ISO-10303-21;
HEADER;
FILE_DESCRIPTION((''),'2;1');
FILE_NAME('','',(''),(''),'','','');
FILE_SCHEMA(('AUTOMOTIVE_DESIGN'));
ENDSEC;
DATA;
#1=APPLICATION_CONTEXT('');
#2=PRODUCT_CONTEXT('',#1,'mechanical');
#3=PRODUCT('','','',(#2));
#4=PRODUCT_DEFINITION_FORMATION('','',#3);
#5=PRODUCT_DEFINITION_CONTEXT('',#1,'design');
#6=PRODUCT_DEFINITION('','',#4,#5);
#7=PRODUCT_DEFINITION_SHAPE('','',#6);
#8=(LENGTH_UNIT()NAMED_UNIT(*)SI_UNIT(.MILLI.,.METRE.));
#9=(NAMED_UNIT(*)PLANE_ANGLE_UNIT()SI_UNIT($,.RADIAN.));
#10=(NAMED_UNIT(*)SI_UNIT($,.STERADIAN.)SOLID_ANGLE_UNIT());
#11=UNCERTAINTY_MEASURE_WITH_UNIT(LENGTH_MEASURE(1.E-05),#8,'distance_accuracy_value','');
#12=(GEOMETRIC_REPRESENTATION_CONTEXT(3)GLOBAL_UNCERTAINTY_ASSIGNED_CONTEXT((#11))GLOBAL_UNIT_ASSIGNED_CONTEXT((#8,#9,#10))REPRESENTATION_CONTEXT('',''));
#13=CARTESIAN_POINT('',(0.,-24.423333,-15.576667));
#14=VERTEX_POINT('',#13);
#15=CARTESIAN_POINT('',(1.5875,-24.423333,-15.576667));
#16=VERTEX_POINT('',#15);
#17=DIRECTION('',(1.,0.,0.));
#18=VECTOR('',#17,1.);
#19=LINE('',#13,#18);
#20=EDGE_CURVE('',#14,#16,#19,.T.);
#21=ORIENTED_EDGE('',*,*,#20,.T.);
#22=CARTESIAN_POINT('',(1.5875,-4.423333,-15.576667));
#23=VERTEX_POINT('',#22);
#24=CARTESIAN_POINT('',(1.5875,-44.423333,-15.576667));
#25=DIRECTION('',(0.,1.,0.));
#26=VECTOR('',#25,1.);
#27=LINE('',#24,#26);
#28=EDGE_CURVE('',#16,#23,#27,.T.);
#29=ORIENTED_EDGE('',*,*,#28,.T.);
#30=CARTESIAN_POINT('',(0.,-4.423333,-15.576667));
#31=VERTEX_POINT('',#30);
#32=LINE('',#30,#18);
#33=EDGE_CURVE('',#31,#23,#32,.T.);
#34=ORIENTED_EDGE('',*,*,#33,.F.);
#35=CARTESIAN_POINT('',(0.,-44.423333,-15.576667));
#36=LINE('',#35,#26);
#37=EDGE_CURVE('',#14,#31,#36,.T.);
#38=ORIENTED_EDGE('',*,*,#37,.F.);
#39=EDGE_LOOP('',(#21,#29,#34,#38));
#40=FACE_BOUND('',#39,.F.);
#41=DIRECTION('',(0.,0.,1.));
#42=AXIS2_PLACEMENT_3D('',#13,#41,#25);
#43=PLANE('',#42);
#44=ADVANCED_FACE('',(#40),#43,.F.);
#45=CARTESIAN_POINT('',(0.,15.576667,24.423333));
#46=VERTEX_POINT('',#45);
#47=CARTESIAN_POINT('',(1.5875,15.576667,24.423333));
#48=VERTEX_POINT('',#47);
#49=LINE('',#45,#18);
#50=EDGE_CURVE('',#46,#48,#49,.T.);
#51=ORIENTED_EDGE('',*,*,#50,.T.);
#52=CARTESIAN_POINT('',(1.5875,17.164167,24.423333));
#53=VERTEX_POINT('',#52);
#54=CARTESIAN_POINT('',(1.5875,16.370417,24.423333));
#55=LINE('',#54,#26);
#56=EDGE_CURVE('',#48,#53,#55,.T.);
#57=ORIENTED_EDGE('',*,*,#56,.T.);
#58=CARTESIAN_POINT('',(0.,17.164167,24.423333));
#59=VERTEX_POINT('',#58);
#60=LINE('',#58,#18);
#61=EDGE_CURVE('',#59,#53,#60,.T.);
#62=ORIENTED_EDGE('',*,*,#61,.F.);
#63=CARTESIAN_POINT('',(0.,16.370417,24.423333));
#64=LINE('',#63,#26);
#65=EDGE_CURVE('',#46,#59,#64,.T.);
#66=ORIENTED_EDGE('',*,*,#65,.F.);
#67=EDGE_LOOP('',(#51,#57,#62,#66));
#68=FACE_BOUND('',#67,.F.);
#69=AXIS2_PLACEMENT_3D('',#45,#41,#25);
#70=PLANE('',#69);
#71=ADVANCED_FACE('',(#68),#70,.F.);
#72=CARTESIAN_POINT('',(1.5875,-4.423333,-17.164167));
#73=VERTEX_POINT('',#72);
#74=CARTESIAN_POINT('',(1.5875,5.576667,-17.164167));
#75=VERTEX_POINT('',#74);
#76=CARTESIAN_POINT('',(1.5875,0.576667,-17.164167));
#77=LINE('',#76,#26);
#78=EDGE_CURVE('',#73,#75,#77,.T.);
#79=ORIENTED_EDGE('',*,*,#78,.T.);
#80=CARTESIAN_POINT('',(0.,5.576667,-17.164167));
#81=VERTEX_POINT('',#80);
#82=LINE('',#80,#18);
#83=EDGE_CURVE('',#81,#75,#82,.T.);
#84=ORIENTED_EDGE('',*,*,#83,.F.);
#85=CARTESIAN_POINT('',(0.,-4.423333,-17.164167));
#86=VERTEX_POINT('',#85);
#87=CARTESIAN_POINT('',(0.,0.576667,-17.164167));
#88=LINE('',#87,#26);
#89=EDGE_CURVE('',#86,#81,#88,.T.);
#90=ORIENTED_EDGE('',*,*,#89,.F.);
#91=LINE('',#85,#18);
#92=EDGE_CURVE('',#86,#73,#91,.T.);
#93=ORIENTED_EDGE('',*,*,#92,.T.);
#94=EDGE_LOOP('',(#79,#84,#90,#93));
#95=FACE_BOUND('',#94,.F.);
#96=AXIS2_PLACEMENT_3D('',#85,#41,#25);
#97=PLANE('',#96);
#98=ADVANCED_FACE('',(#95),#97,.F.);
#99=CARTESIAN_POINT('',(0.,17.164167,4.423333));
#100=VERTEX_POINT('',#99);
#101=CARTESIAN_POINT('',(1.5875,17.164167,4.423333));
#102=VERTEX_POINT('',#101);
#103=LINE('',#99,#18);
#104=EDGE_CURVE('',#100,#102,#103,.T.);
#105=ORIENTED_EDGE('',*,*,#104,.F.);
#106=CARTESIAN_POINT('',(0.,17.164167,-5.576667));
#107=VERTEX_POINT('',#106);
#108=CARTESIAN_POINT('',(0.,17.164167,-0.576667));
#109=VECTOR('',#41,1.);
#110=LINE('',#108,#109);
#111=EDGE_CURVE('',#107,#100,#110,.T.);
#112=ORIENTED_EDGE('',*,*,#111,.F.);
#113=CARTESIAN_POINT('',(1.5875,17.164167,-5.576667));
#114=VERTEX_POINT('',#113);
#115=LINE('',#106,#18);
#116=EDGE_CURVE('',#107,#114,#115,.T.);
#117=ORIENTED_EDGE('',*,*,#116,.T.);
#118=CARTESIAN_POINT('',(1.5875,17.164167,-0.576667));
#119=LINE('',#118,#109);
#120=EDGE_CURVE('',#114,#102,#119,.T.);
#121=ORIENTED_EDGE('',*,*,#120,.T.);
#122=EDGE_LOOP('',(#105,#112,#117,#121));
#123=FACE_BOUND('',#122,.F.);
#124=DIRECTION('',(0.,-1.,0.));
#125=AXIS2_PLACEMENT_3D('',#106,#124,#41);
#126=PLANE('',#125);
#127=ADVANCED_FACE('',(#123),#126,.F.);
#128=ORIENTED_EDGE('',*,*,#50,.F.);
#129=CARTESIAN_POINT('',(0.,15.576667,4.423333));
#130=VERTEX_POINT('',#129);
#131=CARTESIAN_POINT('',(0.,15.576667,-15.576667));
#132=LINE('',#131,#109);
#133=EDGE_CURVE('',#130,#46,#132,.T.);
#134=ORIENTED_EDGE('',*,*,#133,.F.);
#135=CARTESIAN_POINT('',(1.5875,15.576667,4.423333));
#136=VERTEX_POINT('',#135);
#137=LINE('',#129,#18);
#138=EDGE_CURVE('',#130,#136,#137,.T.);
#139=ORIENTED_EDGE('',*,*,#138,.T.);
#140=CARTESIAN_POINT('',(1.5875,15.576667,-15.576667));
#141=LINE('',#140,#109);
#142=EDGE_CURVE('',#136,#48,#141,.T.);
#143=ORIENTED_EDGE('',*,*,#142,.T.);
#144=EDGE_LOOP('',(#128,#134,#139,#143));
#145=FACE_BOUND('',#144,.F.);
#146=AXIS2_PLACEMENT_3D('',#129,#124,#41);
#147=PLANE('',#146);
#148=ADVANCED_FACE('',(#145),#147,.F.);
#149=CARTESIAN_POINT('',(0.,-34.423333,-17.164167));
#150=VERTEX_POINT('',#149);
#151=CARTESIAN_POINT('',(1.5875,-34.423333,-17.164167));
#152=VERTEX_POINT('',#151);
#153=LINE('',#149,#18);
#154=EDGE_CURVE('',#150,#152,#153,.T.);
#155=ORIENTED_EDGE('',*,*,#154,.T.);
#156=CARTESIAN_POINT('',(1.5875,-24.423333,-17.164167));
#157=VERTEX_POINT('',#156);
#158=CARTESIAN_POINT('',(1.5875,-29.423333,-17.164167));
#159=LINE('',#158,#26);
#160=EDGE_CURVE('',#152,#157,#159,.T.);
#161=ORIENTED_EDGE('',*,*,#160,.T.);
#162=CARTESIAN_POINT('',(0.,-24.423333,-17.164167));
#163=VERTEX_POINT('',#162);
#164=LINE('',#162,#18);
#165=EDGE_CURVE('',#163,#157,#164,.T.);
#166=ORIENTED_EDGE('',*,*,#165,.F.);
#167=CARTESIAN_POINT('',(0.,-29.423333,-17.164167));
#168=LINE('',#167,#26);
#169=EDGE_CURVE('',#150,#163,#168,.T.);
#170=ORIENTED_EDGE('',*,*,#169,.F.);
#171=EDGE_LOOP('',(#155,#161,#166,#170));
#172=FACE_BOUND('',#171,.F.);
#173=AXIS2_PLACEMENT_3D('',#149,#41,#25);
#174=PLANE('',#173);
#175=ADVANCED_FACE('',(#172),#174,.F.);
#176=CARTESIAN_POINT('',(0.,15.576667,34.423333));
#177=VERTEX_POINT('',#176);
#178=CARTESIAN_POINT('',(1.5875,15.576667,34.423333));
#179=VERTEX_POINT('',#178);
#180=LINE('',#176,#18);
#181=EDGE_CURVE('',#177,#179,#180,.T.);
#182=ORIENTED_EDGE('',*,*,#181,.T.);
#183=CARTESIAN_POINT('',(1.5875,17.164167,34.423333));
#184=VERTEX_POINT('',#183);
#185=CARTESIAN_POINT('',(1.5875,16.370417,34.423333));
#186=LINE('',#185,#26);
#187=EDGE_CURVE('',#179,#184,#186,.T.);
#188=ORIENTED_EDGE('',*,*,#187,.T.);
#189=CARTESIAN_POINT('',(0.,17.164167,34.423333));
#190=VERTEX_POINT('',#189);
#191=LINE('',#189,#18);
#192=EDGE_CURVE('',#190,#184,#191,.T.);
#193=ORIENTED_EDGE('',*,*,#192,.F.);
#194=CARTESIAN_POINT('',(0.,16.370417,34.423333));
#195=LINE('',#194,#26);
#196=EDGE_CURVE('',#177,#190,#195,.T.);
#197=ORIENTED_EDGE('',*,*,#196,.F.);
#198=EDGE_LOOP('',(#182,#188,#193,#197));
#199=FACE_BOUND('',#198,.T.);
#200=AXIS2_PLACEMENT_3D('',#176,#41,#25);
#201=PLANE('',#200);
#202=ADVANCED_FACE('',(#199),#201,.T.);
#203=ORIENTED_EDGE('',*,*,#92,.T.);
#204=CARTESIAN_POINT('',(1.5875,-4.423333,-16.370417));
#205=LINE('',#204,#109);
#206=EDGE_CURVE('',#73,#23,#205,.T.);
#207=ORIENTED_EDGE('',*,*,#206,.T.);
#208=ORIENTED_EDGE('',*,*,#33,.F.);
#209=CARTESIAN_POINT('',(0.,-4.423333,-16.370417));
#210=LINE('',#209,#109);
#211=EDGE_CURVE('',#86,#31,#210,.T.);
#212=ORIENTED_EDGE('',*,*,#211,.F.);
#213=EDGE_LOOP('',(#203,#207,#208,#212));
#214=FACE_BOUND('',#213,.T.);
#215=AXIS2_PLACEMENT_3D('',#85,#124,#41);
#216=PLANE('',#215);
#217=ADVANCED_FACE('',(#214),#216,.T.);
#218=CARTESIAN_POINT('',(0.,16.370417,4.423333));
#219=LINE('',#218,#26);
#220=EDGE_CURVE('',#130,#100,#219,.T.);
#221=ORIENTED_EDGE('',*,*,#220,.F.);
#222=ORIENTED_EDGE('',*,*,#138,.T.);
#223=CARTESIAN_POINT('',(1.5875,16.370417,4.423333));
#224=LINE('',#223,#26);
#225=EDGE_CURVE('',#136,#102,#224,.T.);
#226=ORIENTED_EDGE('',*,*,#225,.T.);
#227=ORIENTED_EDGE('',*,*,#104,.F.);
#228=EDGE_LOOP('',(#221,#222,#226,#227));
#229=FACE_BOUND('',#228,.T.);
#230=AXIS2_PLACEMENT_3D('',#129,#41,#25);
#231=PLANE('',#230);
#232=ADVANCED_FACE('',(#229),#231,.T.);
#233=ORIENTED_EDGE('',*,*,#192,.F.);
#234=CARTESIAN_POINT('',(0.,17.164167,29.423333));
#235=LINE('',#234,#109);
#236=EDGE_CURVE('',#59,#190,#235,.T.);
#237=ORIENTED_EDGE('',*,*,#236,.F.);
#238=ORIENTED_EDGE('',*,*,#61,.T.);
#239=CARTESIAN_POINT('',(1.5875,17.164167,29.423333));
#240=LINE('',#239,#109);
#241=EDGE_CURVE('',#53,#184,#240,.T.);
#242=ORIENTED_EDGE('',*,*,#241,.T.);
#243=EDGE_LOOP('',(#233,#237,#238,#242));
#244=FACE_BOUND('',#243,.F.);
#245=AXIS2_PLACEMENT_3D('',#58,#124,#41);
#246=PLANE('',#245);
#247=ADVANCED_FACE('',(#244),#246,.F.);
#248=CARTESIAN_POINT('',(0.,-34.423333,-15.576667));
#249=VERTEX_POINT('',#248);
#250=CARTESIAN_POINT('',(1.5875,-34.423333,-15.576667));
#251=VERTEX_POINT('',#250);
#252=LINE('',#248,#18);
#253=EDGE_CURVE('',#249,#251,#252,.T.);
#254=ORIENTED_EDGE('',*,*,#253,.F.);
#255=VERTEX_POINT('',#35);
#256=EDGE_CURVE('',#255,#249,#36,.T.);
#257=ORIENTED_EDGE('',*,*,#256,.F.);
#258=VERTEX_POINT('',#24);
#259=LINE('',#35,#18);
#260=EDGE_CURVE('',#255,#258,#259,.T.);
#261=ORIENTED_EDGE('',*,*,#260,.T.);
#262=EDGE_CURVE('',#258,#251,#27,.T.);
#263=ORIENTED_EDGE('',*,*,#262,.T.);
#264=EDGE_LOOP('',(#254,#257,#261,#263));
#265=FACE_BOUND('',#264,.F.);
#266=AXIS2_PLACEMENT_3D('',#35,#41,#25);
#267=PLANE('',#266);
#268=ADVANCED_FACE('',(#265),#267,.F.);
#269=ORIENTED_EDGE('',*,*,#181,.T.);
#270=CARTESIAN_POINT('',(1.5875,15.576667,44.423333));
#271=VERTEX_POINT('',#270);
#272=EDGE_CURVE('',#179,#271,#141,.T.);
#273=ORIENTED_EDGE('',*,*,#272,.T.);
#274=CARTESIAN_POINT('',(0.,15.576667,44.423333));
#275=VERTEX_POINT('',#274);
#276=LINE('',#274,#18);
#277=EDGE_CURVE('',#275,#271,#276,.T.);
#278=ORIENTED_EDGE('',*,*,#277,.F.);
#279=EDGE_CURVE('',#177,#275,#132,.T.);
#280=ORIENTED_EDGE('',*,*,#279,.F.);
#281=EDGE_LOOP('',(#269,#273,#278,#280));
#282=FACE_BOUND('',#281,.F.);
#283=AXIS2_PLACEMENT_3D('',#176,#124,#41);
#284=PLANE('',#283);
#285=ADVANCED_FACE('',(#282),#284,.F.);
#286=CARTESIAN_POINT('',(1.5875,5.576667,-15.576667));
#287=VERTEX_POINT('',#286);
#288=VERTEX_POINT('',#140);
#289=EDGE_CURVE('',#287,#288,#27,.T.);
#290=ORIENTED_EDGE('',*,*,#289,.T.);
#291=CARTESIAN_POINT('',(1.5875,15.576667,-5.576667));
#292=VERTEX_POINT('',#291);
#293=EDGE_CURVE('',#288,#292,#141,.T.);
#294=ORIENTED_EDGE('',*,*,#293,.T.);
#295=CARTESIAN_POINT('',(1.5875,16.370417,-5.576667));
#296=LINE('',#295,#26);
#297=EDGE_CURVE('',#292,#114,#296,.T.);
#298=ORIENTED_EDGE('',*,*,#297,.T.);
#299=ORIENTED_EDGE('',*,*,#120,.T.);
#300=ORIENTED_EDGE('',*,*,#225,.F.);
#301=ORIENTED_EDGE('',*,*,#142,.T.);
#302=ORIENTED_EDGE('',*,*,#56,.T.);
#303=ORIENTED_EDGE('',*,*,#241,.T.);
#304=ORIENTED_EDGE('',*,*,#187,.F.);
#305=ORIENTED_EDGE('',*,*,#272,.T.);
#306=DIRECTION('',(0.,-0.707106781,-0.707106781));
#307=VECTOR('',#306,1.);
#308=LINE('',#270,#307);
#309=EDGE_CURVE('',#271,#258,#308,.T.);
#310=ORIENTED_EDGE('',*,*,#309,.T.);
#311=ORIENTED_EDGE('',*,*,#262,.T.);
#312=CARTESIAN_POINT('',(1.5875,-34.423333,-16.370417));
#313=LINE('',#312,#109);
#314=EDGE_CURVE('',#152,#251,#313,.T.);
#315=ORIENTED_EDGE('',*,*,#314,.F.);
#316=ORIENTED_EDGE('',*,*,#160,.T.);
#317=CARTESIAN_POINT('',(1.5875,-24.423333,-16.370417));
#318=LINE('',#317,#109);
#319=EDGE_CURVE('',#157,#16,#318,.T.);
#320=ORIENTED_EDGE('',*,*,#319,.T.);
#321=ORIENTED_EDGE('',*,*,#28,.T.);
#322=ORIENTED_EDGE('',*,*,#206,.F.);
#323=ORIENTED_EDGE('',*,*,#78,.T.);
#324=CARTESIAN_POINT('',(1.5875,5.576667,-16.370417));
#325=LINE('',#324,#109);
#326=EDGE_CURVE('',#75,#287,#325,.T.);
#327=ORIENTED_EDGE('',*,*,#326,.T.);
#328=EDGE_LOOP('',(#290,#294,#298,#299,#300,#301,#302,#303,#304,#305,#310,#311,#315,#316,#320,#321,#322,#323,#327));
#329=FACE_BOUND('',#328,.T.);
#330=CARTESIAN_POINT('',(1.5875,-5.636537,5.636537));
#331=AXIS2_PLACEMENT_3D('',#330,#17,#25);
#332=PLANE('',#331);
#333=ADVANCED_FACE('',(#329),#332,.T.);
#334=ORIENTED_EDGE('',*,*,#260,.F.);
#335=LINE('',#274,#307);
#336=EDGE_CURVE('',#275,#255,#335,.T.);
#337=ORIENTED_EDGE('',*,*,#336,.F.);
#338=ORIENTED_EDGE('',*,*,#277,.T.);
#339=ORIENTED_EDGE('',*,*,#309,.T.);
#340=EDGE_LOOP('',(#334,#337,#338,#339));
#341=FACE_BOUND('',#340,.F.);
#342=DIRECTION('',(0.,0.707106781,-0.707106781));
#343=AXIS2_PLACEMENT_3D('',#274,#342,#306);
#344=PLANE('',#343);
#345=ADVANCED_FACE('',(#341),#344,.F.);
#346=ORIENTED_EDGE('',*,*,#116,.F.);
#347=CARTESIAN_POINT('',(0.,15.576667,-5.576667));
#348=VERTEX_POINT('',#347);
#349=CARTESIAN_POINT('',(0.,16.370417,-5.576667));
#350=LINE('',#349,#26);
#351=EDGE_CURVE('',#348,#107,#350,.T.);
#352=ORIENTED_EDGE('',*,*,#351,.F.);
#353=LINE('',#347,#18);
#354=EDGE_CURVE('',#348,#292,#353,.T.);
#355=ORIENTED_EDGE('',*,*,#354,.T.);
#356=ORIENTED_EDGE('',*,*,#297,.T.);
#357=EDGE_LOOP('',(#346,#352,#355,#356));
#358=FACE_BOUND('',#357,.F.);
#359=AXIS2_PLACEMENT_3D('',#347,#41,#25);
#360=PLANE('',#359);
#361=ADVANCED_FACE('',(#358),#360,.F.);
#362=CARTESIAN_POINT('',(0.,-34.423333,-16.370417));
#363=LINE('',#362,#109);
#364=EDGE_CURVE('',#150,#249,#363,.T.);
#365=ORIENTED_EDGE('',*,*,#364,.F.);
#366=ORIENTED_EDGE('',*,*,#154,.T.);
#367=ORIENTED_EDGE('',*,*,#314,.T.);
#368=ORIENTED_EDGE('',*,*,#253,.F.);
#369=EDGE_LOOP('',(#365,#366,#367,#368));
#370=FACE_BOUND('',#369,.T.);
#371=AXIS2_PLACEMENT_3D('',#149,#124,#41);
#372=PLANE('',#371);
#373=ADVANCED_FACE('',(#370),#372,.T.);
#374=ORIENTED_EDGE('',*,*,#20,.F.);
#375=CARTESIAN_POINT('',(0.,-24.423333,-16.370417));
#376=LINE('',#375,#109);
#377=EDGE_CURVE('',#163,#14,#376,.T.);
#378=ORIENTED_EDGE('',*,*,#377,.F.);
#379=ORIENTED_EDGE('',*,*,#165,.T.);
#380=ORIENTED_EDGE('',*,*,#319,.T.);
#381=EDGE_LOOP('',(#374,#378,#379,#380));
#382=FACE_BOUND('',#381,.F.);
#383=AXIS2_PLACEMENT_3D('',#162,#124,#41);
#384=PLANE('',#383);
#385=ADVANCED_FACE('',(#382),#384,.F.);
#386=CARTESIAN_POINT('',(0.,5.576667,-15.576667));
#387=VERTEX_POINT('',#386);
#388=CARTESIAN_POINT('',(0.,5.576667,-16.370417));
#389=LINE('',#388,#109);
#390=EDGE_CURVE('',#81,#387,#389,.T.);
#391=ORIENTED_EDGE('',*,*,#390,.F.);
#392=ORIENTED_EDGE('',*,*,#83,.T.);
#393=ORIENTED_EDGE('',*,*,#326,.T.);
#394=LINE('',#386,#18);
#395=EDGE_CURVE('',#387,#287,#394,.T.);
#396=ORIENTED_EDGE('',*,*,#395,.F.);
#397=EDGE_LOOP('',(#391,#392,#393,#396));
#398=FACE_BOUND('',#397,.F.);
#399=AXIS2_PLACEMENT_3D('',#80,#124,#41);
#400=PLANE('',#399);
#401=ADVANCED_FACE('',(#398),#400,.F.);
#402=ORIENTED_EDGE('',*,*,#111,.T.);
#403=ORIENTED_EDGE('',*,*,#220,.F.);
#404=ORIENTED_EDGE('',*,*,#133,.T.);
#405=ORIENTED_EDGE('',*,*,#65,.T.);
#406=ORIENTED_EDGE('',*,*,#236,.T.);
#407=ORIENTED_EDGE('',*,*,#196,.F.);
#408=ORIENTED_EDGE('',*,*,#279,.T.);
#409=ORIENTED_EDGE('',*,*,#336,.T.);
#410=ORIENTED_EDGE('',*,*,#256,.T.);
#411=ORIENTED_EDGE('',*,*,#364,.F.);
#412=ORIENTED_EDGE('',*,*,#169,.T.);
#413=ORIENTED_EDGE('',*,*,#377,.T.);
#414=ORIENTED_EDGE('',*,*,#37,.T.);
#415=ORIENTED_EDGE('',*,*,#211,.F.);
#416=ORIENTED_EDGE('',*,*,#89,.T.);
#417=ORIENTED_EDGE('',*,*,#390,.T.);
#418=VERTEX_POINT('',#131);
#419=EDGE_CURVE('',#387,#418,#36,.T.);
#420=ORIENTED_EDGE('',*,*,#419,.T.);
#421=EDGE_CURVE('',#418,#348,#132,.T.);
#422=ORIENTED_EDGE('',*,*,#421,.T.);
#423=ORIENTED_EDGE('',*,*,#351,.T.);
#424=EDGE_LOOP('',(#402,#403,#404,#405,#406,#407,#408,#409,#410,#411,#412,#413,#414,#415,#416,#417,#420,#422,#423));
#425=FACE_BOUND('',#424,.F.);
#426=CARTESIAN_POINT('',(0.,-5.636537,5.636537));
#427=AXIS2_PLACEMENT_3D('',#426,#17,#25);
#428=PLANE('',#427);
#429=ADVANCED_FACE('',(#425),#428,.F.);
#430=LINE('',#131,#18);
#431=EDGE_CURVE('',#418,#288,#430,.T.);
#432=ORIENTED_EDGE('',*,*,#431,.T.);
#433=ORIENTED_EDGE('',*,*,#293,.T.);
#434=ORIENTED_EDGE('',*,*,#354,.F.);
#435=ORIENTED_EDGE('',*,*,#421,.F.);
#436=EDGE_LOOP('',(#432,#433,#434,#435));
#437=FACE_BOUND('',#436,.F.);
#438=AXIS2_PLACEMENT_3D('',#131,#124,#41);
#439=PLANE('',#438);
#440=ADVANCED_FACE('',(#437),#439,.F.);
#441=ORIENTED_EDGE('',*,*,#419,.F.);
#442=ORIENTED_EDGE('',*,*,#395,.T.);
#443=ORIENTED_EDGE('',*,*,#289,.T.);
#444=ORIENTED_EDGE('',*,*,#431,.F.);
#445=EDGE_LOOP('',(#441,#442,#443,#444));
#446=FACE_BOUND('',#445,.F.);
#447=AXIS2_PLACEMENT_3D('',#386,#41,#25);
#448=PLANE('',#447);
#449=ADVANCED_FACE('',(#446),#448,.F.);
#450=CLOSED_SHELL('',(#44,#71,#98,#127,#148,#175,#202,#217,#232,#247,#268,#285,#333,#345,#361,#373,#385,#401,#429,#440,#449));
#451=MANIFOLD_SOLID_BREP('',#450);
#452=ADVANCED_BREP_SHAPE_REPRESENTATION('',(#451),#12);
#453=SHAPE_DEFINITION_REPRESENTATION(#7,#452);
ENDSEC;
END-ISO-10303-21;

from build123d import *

# Parameters (mm, degrees)
F0_W     = 10
F0_H     = 1.5875
F0_W_2   = 1.5875
F0_H_2   = 10
F1_DEPTH = 1.5875


# Not quite as in the source:
# - a length typed as a fraction of an inch, garbled in the dataset ("3 / 203.2 mm" for 3/8 in), is restored


with BuildPart() as f1:
    # F0 (on Right) → F1 (new body)
    with BuildSketch(Plane.YZ):
        Polygon((15.5766666667, 44.4233333333), (-44.4233333333, -15.5766666667), (-34.4233333333, -15.5766666667), (-24.4233333333, -15.5766666667), (-4.4233333333, -15.5766666667), (5.5766666667, -15.5766666667), (15.5766666667, -15.5766666667), (15.5766666667, -5.5766666667), (15.5766666667, 4.4233333333), (15.5766666667, 24.4233333333), (15.5766666667, 34.4233333333), align=None)
        with Locations((-29.4233333333, -16.3704166667)):
            Rectangle(F0_W, F0_H)
        with Locations((16.3704166667, 29.4233333333)):
            Rectangle(F0_W_2, F0_H_2)
        with Locations((0.5766666667, -16.3704166667)):
            Rectangle(F0_W, F0_H)
        with Locations((16.3704166667, -0.5766666667)):
            Rectangle(F0_W_2, F0_H_2)
    extrude(amount=F1_DEPTH)


solid = f1.part
